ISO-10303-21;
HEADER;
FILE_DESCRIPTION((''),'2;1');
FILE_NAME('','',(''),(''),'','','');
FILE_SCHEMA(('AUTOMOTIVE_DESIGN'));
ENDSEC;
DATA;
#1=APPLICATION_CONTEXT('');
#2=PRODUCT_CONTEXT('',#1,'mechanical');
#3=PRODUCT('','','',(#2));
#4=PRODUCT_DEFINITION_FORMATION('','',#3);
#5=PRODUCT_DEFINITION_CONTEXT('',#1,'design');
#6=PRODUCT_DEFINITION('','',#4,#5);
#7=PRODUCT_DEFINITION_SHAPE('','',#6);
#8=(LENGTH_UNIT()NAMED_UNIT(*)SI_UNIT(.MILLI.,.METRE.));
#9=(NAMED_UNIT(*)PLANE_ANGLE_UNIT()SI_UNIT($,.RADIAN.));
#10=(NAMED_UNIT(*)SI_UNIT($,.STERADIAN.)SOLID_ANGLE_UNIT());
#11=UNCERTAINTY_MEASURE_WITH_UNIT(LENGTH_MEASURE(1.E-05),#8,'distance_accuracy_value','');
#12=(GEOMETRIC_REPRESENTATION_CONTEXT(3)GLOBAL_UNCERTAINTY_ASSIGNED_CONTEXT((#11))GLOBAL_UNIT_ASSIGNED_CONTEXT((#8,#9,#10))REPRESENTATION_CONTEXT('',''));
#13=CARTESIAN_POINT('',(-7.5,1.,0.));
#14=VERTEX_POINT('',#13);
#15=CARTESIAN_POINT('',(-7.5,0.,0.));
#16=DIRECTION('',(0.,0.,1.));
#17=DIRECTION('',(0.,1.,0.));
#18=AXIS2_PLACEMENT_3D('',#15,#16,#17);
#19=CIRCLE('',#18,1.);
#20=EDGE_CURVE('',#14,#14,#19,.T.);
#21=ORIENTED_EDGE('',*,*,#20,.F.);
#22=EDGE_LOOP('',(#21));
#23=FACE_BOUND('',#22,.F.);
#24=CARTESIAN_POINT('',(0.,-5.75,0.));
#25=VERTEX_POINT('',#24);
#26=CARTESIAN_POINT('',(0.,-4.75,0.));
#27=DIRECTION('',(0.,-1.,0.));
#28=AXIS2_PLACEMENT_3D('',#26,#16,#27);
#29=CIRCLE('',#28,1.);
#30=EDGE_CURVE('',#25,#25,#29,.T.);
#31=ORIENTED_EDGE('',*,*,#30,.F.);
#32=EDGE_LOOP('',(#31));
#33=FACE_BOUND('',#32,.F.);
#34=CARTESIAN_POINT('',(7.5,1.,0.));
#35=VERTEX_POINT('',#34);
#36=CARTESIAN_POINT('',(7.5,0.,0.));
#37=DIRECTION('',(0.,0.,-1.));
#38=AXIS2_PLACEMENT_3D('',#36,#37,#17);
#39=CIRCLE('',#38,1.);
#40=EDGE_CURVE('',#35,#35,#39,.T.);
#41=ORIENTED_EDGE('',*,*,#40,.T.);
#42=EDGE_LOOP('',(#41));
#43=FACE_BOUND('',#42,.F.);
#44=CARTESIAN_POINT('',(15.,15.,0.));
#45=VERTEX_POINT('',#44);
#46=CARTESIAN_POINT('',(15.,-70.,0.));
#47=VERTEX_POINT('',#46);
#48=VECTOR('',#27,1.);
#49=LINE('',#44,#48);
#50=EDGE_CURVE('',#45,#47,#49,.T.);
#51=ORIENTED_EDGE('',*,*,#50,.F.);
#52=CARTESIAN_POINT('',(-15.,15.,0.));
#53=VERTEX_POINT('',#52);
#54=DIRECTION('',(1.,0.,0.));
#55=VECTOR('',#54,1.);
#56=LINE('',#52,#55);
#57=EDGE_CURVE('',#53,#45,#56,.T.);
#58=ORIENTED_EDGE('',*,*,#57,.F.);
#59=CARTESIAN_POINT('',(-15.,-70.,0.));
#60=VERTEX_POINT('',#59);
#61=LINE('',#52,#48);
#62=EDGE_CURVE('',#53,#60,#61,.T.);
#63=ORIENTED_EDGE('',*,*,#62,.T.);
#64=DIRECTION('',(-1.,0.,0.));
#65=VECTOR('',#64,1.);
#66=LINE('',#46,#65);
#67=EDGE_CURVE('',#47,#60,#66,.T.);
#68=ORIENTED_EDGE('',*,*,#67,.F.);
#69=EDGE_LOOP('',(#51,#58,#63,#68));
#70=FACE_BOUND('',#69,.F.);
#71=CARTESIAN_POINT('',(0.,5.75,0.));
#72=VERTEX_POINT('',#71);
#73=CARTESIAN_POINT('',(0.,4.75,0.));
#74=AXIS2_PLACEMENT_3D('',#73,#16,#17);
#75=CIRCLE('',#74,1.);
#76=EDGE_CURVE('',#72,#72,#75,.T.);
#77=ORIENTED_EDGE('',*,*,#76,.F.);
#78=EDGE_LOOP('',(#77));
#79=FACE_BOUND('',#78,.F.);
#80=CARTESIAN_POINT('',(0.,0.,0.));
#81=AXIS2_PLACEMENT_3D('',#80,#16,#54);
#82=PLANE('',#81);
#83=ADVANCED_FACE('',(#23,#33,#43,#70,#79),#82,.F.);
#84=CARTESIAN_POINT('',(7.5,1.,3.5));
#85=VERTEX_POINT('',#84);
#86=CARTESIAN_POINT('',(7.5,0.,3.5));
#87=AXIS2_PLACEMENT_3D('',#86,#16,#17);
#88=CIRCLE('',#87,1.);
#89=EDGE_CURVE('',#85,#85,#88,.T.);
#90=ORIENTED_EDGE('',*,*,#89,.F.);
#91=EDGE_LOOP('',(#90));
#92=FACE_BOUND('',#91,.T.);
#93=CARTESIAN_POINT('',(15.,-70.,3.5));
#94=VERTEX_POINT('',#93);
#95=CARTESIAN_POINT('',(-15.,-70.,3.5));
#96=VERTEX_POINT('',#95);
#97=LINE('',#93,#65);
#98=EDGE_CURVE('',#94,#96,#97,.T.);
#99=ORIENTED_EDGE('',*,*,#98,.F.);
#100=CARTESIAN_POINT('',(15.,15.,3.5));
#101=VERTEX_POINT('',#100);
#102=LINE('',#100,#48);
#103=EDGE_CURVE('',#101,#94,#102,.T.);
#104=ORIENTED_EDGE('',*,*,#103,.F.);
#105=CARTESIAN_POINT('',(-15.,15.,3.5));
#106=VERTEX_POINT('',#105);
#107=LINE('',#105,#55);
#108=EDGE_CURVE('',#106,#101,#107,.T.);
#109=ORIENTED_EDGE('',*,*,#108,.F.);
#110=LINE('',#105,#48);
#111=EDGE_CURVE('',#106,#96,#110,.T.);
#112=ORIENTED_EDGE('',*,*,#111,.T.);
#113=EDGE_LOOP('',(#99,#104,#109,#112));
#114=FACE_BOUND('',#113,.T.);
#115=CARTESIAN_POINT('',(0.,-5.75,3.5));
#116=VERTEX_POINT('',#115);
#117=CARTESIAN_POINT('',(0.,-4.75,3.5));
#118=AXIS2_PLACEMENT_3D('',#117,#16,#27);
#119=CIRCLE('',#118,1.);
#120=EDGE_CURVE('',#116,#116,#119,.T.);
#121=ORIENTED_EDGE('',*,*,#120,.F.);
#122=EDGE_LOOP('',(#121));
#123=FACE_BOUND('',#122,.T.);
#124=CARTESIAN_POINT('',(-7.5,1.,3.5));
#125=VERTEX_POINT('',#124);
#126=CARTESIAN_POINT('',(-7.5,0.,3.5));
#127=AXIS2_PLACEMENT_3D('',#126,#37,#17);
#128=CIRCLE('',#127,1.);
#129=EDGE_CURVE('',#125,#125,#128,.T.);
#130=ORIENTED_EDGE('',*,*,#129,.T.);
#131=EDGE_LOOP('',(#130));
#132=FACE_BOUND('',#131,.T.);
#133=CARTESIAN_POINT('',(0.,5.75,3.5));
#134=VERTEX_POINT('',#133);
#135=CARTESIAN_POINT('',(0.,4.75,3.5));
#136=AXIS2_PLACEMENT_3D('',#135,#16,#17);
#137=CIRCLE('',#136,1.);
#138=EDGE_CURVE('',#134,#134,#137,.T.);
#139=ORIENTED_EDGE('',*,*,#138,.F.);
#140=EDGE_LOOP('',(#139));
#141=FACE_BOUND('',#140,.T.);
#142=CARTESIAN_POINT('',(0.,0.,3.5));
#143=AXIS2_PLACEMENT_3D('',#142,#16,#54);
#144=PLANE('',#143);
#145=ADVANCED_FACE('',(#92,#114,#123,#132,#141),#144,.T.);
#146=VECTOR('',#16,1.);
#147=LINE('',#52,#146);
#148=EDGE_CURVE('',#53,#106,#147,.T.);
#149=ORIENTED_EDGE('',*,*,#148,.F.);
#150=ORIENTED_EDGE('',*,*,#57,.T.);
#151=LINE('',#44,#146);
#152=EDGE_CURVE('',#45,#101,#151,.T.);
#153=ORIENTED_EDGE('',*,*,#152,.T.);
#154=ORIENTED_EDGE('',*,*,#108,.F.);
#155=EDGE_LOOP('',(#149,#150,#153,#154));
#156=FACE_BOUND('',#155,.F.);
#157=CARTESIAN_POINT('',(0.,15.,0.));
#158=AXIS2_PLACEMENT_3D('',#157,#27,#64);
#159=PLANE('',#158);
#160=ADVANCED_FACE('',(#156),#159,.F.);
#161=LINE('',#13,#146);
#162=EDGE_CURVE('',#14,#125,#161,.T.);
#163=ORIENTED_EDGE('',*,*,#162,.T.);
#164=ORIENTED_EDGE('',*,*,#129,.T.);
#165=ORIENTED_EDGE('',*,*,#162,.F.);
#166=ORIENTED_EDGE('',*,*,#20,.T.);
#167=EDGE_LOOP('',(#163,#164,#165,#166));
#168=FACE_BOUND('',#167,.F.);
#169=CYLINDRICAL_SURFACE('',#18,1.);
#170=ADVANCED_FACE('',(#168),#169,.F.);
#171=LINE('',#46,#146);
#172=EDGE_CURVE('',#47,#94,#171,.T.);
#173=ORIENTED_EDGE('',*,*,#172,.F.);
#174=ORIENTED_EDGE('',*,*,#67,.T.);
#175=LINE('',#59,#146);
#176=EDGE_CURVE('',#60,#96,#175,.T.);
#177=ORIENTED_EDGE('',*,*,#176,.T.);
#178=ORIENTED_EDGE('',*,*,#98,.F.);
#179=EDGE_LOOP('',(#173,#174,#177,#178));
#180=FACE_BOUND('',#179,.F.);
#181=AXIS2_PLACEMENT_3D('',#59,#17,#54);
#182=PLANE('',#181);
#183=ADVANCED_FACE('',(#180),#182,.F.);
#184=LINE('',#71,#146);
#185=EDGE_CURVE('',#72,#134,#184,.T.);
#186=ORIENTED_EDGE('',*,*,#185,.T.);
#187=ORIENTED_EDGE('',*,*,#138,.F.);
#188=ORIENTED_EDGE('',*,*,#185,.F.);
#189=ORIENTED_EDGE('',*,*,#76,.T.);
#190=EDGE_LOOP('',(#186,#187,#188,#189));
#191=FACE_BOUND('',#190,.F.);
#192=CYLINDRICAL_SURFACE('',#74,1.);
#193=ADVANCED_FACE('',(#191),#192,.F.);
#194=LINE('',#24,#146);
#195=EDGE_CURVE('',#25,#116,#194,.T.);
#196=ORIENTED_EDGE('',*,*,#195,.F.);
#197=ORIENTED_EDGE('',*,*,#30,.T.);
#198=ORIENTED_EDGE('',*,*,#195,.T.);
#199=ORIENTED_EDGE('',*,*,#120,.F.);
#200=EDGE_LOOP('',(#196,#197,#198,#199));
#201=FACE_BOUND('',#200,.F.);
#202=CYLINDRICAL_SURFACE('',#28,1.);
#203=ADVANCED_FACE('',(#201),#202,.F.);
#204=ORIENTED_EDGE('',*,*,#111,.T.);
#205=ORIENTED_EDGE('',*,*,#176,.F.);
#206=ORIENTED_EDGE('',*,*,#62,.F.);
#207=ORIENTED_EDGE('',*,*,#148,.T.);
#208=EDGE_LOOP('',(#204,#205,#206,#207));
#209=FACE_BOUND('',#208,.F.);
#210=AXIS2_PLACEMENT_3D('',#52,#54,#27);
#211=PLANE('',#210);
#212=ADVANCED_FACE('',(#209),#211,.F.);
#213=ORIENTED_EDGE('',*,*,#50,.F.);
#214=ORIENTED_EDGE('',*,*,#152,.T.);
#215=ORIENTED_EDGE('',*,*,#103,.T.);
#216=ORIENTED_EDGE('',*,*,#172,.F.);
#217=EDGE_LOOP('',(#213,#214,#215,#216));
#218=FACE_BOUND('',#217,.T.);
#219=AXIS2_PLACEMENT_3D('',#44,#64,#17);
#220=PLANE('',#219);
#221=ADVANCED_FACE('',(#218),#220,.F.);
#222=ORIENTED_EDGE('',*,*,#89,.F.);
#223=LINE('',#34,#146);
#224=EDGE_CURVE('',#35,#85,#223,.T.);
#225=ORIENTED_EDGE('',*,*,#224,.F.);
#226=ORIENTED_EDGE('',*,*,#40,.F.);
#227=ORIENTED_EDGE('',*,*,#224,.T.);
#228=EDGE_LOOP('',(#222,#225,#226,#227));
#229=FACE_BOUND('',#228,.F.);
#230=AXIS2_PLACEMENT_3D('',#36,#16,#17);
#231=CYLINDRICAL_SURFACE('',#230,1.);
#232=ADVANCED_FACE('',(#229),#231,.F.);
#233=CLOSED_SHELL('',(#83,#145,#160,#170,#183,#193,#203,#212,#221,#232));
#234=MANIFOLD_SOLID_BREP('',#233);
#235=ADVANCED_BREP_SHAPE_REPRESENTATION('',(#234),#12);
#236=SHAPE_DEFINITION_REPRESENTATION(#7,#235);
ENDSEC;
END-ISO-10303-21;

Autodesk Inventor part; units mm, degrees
ref_plane "YZ Plane" through (0, 0, 0) normal (1, 0, 0) x (0, 1, 0)
ref_plane "XZ Plane" through (0, 0, 0) normal (0, 1, 0) x (-1, 0, 0)
ref_plane "XY Plane" through (0, 0, 0) normal (0, 0, 1) x (1, 0, 0)
sketch "Sketch1" plane through (0, 0, 0) normal (0, 0, 1) x (1, 0, 0)
  line L0 (0, 0) -> (-7.5, 0) construction
  line L1 (0, 0) -> (0, 4.75) construction
  line L2 (0, 0) -> (0, 15)
  line L3 (0, 15) -> (-15, 15)
  line L4 (-15, 15) -> (-15, -70)
  line L5 (-15, -70) -> (0, -70)
  line L6 (0, -70) -> (0, 0)
  dimension "d10" = 7.5
  dimension "d14" = 4.75
  dimension "d17" = 15
  dimension "d18" = 15
  dimension "d19" = 70
extrude "Extrusion1" add sketch "Sketch1" along normal blind 3.5
hole "Hole1" at (0, 4.75, 0) at (-7.5, 0, 0) direction (0, 0, 1) diameter 2 end through all
mirror "Mirror2" about plane through (0, 0, 0) normal (0, 1, 0) of "Hole1"
mirror "Mirror1" about plane through (0, 0, 0) normal (1, 0, 0)
properties part number "segment3a" material "Plywood, Finish"
